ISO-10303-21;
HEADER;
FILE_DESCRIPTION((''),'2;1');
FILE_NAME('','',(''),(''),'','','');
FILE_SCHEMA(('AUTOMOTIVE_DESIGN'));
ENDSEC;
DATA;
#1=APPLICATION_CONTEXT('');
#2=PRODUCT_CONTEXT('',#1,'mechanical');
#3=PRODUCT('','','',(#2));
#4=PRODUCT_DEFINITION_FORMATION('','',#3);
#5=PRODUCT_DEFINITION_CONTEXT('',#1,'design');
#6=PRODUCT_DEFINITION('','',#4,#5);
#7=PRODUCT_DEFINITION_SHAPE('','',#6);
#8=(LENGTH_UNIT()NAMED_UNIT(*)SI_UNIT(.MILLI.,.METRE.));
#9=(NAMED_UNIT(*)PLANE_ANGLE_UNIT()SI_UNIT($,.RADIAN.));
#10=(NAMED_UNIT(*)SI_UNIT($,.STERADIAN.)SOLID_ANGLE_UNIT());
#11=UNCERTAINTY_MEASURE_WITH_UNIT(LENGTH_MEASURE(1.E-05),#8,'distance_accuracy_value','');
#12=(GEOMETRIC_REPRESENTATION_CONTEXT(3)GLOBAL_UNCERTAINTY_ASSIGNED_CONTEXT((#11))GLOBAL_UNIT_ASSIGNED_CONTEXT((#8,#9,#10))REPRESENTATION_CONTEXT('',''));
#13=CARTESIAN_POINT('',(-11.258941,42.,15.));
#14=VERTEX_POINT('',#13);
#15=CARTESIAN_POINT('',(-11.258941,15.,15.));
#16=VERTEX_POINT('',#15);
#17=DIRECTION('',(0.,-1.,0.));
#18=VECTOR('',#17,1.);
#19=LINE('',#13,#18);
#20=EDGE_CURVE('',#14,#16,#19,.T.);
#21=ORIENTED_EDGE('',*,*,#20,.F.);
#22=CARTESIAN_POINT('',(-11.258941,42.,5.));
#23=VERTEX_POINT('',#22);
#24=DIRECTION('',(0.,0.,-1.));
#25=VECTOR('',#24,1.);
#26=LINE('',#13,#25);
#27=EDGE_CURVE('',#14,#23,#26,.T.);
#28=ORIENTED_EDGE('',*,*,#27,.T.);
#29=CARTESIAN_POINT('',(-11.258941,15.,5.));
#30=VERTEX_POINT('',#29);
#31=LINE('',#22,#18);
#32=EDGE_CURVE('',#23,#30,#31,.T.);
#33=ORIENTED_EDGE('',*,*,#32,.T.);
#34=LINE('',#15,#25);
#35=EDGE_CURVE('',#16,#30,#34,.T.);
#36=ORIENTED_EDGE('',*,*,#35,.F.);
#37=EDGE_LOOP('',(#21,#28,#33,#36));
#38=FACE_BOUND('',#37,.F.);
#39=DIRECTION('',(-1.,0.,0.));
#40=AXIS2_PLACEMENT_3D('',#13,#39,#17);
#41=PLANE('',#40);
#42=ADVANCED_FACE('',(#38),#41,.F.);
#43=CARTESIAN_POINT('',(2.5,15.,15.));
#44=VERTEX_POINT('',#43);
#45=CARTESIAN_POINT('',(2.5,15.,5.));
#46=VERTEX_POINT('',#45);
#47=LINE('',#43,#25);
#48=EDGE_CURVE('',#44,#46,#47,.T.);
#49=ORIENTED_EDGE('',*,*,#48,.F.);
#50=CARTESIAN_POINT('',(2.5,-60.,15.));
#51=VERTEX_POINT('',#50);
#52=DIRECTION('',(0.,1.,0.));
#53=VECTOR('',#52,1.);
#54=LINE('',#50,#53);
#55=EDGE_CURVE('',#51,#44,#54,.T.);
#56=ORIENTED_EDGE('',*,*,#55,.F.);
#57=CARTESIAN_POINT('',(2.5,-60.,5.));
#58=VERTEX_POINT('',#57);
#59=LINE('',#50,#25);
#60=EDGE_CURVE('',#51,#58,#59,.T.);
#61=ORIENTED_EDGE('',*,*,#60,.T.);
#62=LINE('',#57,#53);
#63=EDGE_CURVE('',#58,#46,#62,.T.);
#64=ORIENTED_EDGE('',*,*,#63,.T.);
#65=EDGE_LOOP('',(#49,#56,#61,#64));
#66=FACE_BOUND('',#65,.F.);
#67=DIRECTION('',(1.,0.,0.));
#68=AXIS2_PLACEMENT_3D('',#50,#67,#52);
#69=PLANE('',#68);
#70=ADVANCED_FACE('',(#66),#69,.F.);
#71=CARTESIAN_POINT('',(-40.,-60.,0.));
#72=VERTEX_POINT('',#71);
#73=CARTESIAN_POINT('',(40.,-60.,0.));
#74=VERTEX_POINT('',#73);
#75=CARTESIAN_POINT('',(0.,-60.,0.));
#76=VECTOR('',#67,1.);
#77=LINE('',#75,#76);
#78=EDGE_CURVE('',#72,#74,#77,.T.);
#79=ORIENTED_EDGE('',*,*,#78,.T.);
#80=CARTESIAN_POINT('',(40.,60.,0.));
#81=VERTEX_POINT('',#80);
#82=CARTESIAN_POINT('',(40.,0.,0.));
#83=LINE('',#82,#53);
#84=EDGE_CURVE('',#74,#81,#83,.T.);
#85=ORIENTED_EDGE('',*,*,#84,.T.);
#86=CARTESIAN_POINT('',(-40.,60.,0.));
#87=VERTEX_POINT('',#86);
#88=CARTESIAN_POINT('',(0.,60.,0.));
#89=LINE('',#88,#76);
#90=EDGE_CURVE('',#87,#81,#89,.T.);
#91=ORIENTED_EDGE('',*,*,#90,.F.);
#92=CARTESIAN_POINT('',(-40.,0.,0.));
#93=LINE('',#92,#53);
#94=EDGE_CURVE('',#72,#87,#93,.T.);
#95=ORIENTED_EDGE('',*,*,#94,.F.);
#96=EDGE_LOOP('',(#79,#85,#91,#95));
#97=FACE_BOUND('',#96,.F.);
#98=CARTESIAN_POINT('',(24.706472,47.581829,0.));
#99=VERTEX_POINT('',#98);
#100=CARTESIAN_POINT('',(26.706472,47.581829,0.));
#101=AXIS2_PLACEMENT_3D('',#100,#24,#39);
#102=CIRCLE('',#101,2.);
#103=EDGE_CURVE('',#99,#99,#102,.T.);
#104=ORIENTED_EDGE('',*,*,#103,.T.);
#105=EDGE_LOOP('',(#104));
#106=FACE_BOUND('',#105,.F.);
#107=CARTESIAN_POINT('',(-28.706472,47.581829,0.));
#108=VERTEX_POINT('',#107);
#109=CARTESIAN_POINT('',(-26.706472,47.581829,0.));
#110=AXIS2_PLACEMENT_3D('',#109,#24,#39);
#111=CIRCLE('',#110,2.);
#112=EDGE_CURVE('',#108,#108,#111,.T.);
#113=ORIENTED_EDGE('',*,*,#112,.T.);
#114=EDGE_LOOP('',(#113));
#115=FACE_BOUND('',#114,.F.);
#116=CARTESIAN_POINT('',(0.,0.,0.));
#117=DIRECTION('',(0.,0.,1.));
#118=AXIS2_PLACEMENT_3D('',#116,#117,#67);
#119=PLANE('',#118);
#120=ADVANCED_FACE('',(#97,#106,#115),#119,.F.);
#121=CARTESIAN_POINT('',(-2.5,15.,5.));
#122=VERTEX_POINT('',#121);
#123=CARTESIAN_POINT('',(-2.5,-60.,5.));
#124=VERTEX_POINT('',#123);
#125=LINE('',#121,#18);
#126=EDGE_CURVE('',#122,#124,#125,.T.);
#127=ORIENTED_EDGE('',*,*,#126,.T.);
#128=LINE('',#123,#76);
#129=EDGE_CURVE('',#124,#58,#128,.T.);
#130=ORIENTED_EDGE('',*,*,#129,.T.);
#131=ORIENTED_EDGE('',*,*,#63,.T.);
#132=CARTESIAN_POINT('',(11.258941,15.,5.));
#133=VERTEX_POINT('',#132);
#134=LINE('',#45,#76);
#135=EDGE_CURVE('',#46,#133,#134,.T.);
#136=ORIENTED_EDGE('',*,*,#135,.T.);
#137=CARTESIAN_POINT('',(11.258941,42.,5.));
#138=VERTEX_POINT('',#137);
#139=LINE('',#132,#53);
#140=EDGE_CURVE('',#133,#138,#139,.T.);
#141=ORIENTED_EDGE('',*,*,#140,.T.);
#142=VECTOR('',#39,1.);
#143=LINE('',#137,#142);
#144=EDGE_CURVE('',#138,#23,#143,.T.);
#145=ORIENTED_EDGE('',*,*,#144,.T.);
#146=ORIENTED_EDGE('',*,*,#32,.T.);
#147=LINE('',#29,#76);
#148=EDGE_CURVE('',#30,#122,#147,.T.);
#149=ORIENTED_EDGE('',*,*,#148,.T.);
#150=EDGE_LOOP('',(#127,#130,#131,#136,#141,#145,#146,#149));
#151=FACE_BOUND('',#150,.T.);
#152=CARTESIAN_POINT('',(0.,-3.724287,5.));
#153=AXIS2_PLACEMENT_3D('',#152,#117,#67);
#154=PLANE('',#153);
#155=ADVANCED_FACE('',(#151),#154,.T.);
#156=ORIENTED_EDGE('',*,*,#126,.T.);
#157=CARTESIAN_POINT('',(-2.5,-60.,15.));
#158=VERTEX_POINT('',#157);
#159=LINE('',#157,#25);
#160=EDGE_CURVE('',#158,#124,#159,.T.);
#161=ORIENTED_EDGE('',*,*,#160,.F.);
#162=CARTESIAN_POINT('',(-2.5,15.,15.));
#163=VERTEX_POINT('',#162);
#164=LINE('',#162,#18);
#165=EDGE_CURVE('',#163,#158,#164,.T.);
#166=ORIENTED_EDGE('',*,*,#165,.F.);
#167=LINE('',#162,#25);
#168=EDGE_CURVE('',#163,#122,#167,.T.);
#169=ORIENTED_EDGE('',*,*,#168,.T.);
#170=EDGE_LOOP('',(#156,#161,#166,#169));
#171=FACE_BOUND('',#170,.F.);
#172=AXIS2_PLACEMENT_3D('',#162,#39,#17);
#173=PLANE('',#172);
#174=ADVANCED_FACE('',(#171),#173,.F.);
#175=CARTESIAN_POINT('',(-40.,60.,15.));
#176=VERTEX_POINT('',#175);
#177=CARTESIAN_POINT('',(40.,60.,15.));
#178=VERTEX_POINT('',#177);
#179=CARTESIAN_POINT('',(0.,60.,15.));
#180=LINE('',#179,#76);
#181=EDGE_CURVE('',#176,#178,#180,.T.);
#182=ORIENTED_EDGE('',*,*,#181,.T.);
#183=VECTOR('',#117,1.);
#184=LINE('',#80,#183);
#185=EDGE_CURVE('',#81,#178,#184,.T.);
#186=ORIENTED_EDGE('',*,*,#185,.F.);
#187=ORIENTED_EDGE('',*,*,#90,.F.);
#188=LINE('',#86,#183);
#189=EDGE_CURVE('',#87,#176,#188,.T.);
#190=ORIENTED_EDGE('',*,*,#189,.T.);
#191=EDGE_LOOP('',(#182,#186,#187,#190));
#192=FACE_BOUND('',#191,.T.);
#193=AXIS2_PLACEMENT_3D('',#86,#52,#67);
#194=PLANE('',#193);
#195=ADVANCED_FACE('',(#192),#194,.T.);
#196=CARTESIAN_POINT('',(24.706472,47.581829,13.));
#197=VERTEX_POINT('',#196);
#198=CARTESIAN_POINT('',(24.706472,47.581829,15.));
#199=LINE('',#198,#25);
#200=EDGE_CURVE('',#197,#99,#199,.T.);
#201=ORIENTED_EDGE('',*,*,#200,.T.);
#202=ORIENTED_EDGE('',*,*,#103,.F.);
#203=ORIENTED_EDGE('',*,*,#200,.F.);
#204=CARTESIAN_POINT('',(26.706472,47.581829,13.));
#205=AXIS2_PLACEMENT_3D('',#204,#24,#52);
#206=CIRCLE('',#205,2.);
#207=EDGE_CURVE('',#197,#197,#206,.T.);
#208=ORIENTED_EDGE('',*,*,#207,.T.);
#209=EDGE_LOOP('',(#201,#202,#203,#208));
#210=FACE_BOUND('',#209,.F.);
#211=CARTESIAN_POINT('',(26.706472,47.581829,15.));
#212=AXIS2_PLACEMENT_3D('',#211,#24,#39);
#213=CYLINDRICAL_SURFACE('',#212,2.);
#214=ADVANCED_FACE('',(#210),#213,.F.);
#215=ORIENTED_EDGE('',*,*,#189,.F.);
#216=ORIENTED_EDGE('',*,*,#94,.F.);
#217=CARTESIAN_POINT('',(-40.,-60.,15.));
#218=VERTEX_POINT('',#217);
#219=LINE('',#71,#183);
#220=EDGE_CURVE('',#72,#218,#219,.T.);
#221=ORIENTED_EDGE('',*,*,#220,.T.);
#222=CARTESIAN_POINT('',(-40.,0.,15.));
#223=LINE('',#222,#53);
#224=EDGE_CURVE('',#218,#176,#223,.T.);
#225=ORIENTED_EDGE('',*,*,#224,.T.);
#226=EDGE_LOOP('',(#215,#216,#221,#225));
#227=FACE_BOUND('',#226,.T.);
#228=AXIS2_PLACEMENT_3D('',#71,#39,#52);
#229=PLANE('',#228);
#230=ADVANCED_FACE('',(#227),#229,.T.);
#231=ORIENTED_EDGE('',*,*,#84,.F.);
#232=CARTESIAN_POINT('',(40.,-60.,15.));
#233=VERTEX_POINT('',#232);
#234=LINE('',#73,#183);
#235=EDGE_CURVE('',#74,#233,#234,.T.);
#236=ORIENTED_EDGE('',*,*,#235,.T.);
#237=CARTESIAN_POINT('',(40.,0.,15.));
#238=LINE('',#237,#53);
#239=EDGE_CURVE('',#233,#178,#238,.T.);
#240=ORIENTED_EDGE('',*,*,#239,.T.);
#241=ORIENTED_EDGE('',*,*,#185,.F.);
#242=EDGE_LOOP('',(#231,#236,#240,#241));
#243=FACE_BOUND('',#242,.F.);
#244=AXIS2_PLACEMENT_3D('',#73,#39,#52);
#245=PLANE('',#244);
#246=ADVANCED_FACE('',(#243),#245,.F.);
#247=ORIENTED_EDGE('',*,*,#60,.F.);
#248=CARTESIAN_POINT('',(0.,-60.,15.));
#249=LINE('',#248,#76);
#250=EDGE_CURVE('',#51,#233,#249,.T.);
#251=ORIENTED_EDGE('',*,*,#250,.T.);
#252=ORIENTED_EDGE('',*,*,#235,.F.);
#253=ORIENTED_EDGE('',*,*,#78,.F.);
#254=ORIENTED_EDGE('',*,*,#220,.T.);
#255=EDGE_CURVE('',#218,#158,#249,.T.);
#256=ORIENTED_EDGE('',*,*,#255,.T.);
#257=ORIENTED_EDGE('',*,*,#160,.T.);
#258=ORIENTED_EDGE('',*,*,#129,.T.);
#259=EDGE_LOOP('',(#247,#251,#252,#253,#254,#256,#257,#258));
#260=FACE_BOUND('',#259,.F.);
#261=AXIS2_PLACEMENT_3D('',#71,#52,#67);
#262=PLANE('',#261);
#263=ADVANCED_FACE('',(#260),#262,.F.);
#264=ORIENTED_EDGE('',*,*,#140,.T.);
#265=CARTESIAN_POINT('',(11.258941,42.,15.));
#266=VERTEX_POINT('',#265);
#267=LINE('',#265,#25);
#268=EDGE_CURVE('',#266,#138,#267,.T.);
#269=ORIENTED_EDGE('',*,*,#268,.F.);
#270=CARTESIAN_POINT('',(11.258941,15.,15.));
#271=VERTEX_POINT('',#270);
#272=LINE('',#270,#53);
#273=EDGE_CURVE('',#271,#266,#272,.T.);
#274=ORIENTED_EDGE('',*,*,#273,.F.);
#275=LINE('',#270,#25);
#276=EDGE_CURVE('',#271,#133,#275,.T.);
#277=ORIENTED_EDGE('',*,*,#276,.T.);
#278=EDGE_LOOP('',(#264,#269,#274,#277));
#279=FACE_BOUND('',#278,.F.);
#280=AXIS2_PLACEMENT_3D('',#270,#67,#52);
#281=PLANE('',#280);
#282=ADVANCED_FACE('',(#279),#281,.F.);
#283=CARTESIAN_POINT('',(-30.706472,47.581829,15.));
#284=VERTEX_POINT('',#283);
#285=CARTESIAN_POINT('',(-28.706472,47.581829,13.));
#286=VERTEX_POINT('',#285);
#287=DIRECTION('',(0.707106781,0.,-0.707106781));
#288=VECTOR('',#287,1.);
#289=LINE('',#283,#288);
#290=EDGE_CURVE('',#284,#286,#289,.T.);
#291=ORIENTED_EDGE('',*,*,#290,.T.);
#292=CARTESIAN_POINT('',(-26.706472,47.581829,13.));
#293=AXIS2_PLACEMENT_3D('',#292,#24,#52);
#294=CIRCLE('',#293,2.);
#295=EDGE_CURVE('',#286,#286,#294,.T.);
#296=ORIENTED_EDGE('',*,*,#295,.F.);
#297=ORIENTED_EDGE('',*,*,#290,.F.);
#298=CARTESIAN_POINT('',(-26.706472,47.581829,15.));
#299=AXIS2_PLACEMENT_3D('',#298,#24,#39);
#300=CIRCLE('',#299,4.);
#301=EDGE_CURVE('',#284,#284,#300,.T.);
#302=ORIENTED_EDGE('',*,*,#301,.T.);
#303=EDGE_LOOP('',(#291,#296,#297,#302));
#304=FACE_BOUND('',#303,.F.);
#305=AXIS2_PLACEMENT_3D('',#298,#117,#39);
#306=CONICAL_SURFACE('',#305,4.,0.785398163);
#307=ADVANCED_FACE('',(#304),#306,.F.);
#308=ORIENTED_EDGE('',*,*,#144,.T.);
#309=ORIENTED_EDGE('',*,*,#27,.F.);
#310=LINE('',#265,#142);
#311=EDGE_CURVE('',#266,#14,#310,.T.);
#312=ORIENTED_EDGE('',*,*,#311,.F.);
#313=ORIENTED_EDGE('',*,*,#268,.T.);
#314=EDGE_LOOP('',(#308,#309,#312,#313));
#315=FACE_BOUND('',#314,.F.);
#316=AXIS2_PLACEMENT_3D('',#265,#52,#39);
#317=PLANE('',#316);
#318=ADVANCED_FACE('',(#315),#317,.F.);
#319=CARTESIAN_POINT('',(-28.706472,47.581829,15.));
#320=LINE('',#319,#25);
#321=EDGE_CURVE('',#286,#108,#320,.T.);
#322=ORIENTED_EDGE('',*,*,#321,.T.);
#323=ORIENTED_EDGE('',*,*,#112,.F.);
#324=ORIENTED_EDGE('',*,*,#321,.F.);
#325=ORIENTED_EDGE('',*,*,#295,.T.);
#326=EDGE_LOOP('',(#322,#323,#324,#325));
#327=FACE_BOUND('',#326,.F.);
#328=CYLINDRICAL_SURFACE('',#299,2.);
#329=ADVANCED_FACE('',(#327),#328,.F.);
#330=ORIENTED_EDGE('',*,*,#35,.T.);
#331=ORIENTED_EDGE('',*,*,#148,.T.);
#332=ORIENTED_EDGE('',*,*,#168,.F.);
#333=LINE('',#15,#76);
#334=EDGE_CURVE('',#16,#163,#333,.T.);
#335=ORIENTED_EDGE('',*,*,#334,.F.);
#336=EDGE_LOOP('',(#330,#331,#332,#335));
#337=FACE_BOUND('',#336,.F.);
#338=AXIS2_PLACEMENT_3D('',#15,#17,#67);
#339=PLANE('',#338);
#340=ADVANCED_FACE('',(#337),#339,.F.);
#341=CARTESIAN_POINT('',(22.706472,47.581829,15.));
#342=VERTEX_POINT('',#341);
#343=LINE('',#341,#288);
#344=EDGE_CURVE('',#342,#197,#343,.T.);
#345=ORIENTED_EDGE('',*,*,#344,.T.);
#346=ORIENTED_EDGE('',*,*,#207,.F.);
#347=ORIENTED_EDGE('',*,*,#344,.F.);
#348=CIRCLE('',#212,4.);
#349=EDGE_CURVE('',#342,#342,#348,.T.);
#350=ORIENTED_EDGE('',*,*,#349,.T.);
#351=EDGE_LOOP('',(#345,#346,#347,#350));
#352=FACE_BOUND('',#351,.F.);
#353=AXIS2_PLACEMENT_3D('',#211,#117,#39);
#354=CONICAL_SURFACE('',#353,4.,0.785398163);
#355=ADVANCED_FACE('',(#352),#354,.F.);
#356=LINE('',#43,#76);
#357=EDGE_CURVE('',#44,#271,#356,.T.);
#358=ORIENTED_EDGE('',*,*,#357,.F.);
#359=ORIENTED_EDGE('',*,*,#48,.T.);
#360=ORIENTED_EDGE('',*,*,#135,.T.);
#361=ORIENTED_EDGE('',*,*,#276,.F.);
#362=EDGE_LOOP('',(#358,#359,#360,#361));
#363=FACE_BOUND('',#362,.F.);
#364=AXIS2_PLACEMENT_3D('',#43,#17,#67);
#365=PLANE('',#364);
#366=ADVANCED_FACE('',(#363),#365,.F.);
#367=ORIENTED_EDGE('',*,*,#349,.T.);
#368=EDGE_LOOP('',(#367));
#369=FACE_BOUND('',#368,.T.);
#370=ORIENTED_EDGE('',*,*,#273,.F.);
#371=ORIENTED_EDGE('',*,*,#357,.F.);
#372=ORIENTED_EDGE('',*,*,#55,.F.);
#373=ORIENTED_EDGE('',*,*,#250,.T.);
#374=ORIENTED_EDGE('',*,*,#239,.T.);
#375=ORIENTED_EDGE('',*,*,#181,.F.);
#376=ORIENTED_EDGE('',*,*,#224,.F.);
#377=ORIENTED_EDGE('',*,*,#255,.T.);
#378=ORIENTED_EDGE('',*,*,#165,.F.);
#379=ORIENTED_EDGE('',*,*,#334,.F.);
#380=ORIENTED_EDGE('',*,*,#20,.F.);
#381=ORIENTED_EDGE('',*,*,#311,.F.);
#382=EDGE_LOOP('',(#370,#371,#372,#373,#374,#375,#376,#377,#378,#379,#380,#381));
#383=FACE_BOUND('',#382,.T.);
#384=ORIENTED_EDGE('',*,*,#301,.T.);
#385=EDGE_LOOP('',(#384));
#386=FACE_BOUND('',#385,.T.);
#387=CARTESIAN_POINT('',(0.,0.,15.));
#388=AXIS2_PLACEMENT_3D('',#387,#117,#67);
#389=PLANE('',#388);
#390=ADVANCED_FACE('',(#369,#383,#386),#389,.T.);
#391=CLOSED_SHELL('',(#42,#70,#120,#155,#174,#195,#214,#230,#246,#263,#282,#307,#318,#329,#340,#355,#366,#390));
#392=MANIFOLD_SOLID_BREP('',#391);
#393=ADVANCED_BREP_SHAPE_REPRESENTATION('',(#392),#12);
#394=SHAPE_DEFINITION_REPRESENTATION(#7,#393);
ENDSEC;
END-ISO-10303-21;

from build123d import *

# Parameters (mm, degrees)
F0_W           = 80
F0_H           = 120
F1_DEPTH       = 15
F3_DEPTH       = 10
F5_D           = 4
F5_CSINK_D     = 8
F5_CSINK_ANGLE = 90


with BuildPart() as f1:
    # F0 (on Top) → F1 (new body)
    with BuildSketch(Plane.XY):
        Rectangle(F0_W, F0_H)
    extrude(amount=F1_DEPTH)

    # F2 (on face) → F3 (cut)
    with BuildSketch(Plane.XY.offset(15)):
        Polygon((-11.2589411438, 15), (-2.5, 15), (-2.5, -60), (0, -60), (2.5, -60), (2.5, 15), (11.2589411438, 15), (11.2589411438, 42), (-11.2589411438, 42), align=None)
    extrude(amount=-F3_DEPTH, mode=Mode.SUBTRACT)

    # F5 (through all)
    with Locations(Plane.XY.offset(15)):
        with Locations((-26.7064720392, 47.5818291306), (26.7064720392, 47.5818291306)):
            CounterSinkHole(F5_D / 2, F5_CSINK_D / 2, counter_sink_angle=F5_CSINK_ANGLE)


solid = f1.part
